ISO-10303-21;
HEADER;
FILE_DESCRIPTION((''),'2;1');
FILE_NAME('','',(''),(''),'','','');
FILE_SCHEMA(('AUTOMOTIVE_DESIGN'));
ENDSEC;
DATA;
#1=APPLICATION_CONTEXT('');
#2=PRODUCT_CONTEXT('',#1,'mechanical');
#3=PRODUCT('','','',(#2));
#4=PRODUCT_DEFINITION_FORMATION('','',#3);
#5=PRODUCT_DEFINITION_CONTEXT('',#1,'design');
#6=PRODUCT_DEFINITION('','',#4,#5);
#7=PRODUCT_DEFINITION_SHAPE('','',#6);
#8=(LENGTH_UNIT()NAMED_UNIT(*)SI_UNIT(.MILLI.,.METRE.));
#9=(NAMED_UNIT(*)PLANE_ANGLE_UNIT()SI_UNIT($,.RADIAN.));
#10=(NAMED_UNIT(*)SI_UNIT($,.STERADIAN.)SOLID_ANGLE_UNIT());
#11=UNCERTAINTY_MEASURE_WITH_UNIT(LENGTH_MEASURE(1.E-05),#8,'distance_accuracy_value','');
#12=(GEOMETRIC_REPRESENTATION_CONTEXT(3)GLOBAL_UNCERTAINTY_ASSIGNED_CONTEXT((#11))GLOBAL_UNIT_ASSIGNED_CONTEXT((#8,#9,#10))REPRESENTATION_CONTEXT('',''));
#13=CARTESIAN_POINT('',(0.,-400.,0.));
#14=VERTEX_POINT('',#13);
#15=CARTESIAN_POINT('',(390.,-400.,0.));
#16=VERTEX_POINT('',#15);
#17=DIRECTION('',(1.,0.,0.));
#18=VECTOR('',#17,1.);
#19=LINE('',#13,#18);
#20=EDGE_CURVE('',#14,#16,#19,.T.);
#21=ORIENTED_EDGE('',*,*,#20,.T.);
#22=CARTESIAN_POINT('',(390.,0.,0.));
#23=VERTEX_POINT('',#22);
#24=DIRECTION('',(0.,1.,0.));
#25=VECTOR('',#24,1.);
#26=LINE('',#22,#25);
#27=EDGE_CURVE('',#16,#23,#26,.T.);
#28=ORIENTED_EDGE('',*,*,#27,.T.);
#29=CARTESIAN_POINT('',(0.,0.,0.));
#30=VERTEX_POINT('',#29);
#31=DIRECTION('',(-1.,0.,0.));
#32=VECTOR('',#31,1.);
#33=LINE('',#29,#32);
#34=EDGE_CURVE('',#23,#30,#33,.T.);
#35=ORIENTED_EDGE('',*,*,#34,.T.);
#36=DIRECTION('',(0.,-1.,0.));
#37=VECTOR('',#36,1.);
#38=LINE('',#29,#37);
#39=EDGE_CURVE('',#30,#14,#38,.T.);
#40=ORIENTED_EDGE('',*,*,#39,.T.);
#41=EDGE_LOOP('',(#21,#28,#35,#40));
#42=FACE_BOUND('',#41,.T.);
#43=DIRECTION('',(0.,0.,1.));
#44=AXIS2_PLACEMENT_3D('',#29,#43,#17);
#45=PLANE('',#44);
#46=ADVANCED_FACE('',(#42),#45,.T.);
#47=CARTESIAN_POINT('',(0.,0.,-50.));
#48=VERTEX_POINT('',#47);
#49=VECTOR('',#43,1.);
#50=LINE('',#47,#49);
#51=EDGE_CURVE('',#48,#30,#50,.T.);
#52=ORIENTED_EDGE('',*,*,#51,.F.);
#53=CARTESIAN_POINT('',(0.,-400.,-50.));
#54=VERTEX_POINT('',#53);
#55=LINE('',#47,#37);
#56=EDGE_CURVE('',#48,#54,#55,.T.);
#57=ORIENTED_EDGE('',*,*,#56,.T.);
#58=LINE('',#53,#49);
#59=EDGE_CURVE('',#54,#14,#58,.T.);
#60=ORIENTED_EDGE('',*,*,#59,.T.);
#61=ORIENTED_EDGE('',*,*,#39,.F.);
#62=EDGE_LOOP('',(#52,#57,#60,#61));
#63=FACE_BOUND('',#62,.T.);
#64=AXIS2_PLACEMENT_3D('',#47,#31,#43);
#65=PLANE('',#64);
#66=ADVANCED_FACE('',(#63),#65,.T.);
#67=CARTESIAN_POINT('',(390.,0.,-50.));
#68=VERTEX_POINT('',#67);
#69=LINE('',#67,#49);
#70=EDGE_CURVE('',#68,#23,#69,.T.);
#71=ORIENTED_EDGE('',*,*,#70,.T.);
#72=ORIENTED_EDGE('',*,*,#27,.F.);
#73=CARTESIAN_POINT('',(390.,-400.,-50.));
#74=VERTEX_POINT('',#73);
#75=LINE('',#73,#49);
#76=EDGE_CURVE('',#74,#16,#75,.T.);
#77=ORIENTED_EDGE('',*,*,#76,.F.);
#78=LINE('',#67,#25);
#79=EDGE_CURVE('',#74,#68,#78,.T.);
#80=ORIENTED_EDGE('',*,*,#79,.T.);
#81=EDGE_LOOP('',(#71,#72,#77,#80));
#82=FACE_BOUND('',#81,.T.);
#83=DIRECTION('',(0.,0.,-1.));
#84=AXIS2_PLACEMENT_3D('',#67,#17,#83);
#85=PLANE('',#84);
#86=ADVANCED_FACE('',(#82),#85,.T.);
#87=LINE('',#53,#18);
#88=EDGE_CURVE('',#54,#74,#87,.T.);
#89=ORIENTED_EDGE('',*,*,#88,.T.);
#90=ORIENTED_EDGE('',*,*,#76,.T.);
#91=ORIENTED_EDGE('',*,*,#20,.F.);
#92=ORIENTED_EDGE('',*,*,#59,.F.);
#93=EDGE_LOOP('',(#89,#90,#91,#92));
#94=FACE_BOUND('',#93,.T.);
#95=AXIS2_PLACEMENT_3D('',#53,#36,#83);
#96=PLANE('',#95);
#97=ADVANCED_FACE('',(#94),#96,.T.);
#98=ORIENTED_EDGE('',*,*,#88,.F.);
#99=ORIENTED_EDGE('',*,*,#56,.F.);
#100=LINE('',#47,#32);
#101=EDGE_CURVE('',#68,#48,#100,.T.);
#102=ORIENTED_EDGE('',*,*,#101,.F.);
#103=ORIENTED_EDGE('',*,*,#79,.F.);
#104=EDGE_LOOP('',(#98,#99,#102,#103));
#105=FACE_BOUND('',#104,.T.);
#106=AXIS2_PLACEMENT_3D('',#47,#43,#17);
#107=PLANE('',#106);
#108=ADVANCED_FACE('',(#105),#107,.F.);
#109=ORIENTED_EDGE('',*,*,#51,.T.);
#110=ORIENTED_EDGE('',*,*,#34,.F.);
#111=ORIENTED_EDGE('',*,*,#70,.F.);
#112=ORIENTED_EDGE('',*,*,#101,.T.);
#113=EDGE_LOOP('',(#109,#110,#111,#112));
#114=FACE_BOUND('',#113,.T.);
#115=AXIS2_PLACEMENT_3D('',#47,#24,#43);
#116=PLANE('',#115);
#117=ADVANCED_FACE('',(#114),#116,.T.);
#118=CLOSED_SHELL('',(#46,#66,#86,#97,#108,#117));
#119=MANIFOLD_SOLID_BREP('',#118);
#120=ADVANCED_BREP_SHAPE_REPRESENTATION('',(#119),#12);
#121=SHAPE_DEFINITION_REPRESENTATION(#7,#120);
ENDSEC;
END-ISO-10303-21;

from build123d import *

# Parameters (mm, degrees)
IZIM1_W            = 390
IZIM1_H            = 400
TABAN_FLAN_1_DEPTH = 50


# Sheet-metal steps are written as plain solids
with BuildPart() as part:
    # Çizim1 → Taban-Flanş1 (new body)
    with BuildSketch(Plane.XY):
        with Locations((195, -200)):
            Rectangle(IZIM1_W, IZIM1_H)
    extrude(amount=-TABAN_FLAN_1_DEPTH)


solid = part.part
